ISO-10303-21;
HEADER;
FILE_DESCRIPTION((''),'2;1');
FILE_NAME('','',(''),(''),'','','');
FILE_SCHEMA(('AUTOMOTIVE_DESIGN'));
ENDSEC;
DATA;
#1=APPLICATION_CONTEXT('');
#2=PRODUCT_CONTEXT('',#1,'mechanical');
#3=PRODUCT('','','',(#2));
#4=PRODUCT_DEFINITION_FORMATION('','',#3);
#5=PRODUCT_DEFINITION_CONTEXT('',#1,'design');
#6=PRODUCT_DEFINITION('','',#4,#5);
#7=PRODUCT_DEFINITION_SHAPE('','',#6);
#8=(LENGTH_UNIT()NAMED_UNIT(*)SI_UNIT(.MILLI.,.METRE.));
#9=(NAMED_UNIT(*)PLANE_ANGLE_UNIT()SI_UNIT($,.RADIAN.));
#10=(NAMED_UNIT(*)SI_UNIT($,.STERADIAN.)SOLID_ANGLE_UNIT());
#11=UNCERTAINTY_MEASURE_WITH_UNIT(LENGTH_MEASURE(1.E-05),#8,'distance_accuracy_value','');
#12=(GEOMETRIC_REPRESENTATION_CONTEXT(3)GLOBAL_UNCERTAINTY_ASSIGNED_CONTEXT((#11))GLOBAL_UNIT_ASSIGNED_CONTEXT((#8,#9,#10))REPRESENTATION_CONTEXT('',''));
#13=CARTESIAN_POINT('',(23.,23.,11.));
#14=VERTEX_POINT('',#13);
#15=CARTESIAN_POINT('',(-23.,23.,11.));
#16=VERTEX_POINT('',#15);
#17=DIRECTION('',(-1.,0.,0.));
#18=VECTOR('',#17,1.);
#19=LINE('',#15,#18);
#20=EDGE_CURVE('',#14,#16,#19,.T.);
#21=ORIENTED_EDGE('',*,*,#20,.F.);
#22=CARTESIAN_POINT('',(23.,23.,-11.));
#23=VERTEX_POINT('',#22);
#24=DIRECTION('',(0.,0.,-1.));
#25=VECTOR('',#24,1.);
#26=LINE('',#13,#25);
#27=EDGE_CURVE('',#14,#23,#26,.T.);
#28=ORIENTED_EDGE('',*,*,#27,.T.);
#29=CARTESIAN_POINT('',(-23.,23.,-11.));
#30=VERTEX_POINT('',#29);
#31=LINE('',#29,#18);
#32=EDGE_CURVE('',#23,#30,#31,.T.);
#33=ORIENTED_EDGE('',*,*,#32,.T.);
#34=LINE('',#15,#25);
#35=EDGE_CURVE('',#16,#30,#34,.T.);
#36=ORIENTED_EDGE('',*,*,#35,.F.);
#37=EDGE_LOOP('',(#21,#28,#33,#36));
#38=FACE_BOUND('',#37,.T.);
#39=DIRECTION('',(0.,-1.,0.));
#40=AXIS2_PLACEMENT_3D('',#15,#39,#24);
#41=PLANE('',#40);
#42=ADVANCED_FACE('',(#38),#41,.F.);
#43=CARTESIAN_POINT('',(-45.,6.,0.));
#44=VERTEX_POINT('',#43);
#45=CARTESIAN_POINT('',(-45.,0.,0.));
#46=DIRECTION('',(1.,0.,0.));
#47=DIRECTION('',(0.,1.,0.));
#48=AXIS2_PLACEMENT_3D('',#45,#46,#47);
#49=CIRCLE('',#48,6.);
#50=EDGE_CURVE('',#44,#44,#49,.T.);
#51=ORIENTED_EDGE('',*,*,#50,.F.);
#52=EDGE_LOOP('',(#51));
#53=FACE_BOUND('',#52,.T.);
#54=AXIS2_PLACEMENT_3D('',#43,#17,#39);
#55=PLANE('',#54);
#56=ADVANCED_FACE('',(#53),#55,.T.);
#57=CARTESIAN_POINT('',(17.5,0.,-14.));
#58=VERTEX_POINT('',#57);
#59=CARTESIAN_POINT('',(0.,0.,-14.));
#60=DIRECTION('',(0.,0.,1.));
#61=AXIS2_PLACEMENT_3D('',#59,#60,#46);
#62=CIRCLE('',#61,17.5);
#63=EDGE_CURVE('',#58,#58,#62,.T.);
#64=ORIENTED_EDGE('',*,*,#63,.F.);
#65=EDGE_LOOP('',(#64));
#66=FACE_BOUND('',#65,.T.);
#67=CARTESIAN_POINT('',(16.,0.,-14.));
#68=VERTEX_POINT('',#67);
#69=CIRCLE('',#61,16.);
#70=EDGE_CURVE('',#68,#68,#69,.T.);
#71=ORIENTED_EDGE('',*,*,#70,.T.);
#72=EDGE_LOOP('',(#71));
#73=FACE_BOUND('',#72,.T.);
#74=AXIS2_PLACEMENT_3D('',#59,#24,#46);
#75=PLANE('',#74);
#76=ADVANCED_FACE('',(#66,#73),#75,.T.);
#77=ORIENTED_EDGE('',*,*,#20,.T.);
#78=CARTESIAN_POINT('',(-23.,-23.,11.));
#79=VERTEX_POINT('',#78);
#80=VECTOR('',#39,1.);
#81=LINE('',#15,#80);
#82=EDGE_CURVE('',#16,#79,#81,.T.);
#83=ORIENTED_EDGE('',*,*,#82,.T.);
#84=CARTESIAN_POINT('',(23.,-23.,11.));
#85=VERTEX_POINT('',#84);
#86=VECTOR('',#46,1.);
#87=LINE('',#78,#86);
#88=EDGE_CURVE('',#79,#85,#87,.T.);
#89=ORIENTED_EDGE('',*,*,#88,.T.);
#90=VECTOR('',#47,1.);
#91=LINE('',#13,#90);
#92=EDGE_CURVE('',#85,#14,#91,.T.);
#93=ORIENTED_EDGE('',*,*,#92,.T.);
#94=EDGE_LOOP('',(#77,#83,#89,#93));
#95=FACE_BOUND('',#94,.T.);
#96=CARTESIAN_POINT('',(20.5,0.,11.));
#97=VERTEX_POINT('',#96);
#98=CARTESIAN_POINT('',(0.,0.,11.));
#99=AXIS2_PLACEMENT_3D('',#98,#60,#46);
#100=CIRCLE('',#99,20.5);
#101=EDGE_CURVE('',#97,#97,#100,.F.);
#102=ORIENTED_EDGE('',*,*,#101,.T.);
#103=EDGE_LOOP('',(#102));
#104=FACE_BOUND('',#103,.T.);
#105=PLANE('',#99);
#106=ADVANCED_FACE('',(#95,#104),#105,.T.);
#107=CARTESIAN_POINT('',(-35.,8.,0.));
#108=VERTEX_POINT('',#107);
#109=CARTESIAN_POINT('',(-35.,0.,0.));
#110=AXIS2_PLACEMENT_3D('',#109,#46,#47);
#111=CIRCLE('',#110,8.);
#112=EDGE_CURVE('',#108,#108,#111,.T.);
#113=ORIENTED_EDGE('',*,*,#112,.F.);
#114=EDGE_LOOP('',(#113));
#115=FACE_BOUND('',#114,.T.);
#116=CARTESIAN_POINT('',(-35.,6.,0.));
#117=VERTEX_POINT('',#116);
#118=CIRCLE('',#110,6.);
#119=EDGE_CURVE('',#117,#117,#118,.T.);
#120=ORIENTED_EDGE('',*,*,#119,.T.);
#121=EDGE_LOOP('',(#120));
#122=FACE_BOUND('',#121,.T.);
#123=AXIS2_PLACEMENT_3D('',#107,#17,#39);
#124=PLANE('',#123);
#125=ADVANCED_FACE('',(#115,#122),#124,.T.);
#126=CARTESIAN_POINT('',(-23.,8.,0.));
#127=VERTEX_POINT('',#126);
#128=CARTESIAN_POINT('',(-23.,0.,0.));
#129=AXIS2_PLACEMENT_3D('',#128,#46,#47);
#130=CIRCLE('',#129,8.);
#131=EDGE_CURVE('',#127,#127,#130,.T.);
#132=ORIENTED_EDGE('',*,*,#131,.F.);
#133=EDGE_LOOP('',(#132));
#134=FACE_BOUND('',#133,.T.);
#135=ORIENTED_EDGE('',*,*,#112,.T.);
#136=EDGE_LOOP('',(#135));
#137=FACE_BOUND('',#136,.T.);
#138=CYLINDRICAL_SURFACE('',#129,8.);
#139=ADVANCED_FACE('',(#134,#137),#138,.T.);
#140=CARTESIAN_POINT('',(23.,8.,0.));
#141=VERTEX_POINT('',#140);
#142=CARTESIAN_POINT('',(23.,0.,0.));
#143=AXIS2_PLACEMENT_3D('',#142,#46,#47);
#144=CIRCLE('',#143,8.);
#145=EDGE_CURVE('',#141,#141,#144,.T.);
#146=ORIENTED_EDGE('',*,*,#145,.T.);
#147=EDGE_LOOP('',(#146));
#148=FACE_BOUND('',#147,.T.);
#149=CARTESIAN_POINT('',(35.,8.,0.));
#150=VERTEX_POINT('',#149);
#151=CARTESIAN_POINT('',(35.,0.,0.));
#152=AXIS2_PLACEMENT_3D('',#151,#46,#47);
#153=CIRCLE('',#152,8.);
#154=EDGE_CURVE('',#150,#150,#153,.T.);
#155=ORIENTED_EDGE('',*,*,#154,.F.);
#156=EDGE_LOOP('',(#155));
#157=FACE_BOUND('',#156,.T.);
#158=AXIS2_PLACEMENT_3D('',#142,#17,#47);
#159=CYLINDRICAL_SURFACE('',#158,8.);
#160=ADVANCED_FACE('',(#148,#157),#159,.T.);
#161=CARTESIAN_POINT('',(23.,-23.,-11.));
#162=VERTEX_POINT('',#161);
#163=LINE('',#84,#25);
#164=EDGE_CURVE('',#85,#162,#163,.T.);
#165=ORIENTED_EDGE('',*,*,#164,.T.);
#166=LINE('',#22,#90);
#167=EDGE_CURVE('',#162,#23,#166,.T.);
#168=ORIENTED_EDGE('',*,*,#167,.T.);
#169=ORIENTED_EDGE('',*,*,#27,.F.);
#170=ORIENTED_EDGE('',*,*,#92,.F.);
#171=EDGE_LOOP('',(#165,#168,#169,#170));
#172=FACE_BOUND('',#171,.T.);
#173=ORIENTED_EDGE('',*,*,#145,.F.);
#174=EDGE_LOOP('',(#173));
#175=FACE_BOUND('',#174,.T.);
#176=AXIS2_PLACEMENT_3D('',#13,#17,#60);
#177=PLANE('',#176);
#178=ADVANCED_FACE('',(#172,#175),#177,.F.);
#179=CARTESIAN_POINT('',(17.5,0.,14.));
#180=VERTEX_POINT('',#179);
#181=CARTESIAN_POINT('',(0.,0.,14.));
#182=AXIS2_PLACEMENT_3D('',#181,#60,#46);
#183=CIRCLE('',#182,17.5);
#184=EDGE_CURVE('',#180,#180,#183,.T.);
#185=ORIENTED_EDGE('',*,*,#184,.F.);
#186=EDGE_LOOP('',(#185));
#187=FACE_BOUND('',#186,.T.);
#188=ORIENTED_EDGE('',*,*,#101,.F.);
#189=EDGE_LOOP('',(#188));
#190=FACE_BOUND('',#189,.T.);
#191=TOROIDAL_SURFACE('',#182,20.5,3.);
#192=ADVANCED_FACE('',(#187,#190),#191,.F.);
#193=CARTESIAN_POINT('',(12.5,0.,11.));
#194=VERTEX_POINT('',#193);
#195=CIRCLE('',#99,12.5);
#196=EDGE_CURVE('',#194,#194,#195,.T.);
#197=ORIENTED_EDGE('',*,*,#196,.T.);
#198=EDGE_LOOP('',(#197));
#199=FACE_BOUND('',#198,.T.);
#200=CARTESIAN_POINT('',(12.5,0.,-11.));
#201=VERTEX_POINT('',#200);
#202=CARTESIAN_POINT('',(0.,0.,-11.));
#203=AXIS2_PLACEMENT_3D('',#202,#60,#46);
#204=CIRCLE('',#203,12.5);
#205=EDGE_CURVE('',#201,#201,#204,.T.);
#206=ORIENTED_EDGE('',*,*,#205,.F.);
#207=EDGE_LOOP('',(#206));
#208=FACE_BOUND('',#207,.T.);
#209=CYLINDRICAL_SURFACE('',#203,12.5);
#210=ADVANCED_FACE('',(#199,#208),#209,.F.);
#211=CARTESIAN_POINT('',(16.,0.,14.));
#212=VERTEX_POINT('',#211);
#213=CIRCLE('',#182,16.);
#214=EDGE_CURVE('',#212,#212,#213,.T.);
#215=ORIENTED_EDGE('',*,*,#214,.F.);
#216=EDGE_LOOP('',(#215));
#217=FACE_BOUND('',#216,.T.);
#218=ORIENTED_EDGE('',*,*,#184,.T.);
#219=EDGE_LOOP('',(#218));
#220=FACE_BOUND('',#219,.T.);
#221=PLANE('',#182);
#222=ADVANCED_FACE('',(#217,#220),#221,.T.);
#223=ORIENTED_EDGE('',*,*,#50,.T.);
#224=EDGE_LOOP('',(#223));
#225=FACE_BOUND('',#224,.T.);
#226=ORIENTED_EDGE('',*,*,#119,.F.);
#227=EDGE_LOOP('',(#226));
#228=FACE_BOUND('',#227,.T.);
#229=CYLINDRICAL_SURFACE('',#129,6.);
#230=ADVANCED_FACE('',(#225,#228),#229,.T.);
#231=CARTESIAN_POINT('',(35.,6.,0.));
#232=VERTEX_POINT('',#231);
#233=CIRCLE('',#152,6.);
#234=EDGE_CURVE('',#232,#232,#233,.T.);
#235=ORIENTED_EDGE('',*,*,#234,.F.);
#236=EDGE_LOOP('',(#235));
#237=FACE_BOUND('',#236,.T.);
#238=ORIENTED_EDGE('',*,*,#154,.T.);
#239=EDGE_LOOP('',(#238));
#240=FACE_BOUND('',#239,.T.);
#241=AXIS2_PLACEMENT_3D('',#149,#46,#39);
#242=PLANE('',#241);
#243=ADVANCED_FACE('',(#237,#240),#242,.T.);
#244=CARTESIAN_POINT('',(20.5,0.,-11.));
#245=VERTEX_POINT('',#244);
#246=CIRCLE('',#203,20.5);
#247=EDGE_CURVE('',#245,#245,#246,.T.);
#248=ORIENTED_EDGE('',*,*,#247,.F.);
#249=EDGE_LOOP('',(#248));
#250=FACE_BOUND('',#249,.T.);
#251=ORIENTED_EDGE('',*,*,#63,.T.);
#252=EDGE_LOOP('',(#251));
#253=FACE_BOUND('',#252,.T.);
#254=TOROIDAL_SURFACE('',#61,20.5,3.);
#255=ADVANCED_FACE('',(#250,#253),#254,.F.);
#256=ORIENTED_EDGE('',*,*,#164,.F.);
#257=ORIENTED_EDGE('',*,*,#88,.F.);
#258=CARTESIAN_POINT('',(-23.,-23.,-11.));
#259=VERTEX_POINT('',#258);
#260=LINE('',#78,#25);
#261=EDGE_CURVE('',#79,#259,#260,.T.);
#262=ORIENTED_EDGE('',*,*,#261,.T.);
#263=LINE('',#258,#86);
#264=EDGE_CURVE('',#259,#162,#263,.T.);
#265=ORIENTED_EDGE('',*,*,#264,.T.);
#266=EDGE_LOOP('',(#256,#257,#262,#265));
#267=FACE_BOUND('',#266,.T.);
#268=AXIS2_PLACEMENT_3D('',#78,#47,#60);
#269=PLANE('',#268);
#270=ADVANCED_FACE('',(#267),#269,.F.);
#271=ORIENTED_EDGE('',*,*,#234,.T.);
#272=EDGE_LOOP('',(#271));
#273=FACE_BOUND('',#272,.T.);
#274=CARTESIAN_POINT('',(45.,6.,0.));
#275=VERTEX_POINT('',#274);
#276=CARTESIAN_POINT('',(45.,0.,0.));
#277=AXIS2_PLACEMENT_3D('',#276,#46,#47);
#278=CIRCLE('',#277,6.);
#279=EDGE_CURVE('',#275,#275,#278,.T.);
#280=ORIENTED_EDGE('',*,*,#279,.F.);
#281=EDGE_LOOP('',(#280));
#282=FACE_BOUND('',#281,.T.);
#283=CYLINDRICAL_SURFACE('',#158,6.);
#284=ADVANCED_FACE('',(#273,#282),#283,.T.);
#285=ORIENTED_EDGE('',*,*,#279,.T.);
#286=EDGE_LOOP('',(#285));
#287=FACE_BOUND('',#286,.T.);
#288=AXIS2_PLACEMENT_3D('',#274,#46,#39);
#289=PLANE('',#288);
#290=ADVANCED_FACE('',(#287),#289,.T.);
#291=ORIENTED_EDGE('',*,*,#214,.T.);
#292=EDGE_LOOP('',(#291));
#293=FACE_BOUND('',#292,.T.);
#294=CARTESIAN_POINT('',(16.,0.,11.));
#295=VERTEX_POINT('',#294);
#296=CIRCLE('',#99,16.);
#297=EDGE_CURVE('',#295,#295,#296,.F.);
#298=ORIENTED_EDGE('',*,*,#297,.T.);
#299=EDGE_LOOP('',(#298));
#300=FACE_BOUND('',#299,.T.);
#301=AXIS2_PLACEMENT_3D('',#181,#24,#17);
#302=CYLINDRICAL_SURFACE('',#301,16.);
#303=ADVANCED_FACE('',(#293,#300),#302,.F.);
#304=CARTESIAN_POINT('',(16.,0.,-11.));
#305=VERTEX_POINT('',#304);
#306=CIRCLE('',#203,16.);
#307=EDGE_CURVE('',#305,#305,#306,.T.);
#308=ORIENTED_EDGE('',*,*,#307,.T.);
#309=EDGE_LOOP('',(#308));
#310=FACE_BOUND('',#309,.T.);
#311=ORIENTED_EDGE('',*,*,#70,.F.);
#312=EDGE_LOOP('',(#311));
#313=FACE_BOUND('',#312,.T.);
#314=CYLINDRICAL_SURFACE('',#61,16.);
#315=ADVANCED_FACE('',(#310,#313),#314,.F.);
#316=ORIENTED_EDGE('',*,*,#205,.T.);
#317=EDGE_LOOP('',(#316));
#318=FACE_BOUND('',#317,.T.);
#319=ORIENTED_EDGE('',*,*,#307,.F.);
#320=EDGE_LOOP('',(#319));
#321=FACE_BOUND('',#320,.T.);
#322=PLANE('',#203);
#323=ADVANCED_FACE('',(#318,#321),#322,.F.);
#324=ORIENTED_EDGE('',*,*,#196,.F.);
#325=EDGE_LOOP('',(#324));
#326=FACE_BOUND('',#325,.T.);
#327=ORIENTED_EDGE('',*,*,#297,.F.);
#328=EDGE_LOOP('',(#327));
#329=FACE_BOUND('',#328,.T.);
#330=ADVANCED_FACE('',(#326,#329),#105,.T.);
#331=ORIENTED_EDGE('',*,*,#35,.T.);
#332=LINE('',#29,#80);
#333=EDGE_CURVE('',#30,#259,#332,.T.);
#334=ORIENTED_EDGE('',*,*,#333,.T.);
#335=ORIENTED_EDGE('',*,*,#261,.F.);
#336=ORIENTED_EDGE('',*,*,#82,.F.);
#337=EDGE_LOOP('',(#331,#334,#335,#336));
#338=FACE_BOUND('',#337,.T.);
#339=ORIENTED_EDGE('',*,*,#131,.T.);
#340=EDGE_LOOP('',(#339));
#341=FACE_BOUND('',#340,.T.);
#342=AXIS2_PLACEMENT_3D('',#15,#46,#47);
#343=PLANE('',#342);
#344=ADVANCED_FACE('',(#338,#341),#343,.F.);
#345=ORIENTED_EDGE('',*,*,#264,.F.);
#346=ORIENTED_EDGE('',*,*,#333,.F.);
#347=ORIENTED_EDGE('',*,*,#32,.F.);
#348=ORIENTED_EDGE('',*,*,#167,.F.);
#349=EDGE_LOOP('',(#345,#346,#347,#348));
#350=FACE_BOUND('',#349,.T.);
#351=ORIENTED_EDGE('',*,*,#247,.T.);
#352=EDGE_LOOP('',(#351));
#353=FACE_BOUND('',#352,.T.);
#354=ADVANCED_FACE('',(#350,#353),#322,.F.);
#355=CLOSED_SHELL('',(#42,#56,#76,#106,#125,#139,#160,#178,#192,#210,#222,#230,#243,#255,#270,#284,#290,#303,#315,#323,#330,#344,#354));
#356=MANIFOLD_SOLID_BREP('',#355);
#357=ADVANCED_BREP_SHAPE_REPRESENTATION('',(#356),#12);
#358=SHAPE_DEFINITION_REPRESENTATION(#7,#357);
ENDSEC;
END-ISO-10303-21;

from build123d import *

# Parameters (mm, degrees)
SKETCH1_W           = 46
SKETCH1_H           = 46
BOSS_EXTRUDE3_DEPTH = 11
SKETCH3_R           = 17.5
SKETCH3_R_2         = 16
BOSS_EXTRUDE5_DEPTH = 3
SKETCH6_R           = 12.5
CUT_EXTRUDE2_DEPTH  = 40.268307832
FILLET1_R           = 3


with BuildPart() as part:
    # Sketch1 → Boss-Extrude3 (new, symmetric)
    with BuildSketch(Plane.XY):
        Rectangle(SKETCH1_W, SKETCH1_H)
    extrude(amount=BOSS_EXTRUDE3_DEPTH, both=True)

    # Sketch3 → Boss-Extrude5 (add)
    with BuildSketch(Plane.XY.offset(11)):
        Circle(SKETCH3_R)
        Circle(SKETCH3_R_2, mode=Mode.SUBTRACT)
    boss_extrude5 = extrude(amount=BOSS_EXTRUDE5_DEPTH)

    # Sketch6 → Cut-Extrude2 (cut, through all)
    with BuildSketch(Plane.XY.offset(11)):
        Circle(SKETCH6_R)
    extrude(amount=-CUT_EXTRUDE2_DEPTH, mode=Mode.SUBTRACT)

    # Mirror1: Boss-Extrude5 across plane
    add(boss_extrude5.mirror(Plane.XY))

    # Fillet1
    fillet1_edges = [part.edges().sort_by_distance(p)[0] for p in [
        (-17.5, 0, 11),
        (-17.5, 0, -11),
    ]]
    fillet(fillet1_edges, radius=FILLET1_R - 0.0001)  # a hair under: the kernel refuses the full size

    # Sketch9 → Revolve1 (revolve)
    with BuildSketch(Plane.XY):
        Polygon((-23, 0), (-23, 8), (-35, 8), (-35, 6), (-45, 6), (-45, 0), align=None)
    revolve1 = revolve(axis=Axis((-23, 0, 0), (-1, 0, 0)))

    # Mirror2: Revolve1 across plane
    add(revolve1.mirror(Plane(origin=(0, 0, 0), x_dir=(0, 0, 1), z_dir=(1, 0, 0))))


solid = part.part
